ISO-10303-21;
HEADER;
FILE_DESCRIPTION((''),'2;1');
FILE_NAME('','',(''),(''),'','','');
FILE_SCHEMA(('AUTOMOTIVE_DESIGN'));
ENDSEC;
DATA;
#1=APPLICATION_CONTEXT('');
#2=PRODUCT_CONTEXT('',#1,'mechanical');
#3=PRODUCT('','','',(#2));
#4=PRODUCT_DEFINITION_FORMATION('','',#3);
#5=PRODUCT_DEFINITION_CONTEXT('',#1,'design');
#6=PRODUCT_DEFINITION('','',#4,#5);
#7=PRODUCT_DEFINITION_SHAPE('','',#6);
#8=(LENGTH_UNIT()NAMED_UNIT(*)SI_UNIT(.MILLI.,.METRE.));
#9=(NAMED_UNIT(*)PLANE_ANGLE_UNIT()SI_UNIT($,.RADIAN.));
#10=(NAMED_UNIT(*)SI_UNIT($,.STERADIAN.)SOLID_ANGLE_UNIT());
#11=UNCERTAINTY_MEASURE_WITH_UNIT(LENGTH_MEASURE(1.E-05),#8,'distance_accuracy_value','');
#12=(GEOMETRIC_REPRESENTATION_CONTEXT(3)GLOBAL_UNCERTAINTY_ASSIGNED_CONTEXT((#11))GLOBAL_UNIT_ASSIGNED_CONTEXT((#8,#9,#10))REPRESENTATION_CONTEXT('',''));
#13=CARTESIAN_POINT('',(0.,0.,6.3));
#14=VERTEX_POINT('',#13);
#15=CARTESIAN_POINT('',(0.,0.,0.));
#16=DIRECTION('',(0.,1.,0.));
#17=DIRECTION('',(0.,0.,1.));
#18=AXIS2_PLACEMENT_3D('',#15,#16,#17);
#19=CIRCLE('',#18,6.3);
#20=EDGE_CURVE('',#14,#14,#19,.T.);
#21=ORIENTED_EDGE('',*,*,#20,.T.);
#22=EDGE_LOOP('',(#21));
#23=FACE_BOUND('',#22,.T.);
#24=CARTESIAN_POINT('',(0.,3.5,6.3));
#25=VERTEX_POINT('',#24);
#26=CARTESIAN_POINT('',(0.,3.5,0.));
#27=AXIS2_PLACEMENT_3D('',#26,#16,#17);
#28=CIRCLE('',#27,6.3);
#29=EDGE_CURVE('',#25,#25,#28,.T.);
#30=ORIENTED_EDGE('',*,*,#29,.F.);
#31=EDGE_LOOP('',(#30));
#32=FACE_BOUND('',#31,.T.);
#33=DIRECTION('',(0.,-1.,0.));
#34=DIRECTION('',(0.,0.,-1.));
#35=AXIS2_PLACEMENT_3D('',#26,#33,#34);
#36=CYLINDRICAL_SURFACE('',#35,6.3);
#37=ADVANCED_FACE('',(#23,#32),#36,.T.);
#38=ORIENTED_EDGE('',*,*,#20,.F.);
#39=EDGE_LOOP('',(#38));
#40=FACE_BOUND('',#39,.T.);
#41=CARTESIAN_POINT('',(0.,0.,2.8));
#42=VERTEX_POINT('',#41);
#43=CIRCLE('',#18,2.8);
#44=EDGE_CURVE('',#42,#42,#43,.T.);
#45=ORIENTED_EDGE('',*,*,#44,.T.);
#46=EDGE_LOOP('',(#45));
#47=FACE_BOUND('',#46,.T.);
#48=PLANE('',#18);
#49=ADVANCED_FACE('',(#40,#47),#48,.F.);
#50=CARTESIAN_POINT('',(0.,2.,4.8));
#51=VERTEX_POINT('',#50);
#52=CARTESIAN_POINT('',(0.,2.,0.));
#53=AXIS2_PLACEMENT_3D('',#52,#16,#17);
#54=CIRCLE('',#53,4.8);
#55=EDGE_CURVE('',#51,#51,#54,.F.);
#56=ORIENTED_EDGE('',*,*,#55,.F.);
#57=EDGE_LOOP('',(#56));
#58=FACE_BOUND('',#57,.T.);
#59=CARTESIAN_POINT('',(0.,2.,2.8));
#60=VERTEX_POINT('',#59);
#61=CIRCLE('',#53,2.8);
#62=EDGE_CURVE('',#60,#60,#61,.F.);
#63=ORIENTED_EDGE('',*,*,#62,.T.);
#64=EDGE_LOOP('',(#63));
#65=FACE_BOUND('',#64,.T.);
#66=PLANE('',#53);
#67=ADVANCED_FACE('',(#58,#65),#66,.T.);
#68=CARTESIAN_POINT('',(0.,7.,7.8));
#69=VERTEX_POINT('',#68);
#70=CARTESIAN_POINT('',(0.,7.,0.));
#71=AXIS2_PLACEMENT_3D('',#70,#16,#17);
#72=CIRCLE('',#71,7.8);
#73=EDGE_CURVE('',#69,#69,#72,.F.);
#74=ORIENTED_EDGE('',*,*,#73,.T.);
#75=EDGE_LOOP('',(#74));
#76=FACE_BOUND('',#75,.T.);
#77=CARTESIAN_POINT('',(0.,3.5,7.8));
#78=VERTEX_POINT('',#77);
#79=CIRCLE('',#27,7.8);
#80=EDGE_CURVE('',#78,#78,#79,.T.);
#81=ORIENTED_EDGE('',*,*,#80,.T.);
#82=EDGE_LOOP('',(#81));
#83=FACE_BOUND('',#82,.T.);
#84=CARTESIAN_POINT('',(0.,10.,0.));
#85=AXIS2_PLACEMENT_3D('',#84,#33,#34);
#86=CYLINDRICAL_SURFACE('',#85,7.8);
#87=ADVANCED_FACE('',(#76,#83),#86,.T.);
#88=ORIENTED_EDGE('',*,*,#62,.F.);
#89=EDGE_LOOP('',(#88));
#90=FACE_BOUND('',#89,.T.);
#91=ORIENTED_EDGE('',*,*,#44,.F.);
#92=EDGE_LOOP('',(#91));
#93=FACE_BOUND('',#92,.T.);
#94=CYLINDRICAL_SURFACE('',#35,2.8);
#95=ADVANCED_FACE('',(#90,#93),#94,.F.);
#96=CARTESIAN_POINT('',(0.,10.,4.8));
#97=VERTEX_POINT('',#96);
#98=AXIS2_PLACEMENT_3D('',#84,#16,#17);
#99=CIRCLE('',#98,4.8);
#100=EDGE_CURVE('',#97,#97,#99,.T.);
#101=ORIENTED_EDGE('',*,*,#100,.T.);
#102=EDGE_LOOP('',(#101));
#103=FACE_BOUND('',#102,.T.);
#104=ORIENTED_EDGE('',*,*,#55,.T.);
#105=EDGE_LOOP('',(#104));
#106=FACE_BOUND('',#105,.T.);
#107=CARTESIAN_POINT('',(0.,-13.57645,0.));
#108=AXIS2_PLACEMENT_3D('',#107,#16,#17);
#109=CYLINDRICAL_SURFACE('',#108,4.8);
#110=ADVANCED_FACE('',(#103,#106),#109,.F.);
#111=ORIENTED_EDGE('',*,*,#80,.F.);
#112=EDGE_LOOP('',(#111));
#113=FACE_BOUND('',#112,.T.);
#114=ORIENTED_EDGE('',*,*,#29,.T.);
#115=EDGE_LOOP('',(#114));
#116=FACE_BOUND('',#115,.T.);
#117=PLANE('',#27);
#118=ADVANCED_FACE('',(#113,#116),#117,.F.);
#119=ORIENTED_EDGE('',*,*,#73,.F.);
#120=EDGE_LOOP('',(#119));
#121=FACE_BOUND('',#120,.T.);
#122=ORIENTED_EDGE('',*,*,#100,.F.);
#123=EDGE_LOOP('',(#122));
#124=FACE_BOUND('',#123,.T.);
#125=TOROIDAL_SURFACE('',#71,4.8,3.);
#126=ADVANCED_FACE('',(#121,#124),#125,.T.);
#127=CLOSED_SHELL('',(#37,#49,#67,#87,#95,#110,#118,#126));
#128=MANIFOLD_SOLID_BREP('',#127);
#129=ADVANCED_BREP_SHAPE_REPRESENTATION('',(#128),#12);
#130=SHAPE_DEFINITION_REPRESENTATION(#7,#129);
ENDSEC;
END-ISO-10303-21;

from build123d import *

# Parameters (mm, degrees)
SKETCH1_R               = 7.8
BOSS_EXTRUDE1_DEPTH     = 10
SKETCH2_R               = 4.8
CUT_EXTRUDE1_DEPTH      = 8
CUT_EXTRUDE2_DEPTH      = 1.5
CUT_EXTRUDE2_DEPTH_BACK = 14.626444878
SKETCH3_R               = 7.8
SKETCH3_R_2             = 6.3
SKETCH3_R_3             = 2.8
FILLET1_R               = 3


with BuildPart() as part:
    # Sketch1 → Boss-Extrude1 (new body)
    with BuildSketch(Plane(origin=(0, 0, 0), x_dir=(1, 0, 0), z_dir=(0, 1, 0))):
        with Locations(Location((0, 0, 0), (0, 0, 270))):
            Circle(SKETCH1_R)
    extrude(amount=BOSS_EXTRUDE1_DEPTH)

    # Sketch2 → Cut-Extrude1 (cut)
    with BuildSketch(Plane(origin=(0, 10, 0), x_dir=(1, 0, 0), z_dir=(0, 1, 0))):
        with Locations(Location((0, 0, 0), (0, 0, 270))):
            Circle(SKETCH2_R)
    extrude(amount=-CUT_EXTRUDE1_DEPTH, mode=Mode.SUBTRACT)

    # Sketch3 → Cut-Extrude2 (cut, two sides: drawn at the far end of the back side and taken through both)
    # profile 1 of 2: a face of its own
    with BuildSketch(Plane(origin=(0, 2, 0), x_dir=(1, 0, 0), z_dir=(0, 1, 0)).offset(-CUT_EXTRUDE2_DEPTH_BACK)):
        with Locations(Location((0, 0, 0), (0, 0, 270))):
            Circle(SKETCH3_R)
        with Locations(Location((0, 0, 0), (0, 0, 270))):
            Circle(SKETCH3_R_2, mode=Mode.SUBTRACT)
    # profile 2 of 2: a face of its own
    with BuildSketch(Plane(origin=(0, 2, 0), x_dir=(1, 0, 0), z_dir=(0, 1, 0)).offset(-CUT_EXTRUDE2_DEPTH_BACK)):
        with Locations(Location((0, 0, 0), (0, 0, 270))):
            Circle(SKETCH3_R_3)
    extrude(amount=CUT_EXTRUDE2_DEPTH + CUT_EXTRUDE2_DEPTH_BACK, mode=Mode.SUBTRACT)

    # Fillet1
    fillet1_edges = [part.edges().sort_by_distance(p)[0] for p in [
        (0, 10, -7.8),
    ]]
    fillet(fillet1_edges, radius=FILLET1_R - 0.0001)  # a hair under: the kernel refuses the full size


solid = part.part
